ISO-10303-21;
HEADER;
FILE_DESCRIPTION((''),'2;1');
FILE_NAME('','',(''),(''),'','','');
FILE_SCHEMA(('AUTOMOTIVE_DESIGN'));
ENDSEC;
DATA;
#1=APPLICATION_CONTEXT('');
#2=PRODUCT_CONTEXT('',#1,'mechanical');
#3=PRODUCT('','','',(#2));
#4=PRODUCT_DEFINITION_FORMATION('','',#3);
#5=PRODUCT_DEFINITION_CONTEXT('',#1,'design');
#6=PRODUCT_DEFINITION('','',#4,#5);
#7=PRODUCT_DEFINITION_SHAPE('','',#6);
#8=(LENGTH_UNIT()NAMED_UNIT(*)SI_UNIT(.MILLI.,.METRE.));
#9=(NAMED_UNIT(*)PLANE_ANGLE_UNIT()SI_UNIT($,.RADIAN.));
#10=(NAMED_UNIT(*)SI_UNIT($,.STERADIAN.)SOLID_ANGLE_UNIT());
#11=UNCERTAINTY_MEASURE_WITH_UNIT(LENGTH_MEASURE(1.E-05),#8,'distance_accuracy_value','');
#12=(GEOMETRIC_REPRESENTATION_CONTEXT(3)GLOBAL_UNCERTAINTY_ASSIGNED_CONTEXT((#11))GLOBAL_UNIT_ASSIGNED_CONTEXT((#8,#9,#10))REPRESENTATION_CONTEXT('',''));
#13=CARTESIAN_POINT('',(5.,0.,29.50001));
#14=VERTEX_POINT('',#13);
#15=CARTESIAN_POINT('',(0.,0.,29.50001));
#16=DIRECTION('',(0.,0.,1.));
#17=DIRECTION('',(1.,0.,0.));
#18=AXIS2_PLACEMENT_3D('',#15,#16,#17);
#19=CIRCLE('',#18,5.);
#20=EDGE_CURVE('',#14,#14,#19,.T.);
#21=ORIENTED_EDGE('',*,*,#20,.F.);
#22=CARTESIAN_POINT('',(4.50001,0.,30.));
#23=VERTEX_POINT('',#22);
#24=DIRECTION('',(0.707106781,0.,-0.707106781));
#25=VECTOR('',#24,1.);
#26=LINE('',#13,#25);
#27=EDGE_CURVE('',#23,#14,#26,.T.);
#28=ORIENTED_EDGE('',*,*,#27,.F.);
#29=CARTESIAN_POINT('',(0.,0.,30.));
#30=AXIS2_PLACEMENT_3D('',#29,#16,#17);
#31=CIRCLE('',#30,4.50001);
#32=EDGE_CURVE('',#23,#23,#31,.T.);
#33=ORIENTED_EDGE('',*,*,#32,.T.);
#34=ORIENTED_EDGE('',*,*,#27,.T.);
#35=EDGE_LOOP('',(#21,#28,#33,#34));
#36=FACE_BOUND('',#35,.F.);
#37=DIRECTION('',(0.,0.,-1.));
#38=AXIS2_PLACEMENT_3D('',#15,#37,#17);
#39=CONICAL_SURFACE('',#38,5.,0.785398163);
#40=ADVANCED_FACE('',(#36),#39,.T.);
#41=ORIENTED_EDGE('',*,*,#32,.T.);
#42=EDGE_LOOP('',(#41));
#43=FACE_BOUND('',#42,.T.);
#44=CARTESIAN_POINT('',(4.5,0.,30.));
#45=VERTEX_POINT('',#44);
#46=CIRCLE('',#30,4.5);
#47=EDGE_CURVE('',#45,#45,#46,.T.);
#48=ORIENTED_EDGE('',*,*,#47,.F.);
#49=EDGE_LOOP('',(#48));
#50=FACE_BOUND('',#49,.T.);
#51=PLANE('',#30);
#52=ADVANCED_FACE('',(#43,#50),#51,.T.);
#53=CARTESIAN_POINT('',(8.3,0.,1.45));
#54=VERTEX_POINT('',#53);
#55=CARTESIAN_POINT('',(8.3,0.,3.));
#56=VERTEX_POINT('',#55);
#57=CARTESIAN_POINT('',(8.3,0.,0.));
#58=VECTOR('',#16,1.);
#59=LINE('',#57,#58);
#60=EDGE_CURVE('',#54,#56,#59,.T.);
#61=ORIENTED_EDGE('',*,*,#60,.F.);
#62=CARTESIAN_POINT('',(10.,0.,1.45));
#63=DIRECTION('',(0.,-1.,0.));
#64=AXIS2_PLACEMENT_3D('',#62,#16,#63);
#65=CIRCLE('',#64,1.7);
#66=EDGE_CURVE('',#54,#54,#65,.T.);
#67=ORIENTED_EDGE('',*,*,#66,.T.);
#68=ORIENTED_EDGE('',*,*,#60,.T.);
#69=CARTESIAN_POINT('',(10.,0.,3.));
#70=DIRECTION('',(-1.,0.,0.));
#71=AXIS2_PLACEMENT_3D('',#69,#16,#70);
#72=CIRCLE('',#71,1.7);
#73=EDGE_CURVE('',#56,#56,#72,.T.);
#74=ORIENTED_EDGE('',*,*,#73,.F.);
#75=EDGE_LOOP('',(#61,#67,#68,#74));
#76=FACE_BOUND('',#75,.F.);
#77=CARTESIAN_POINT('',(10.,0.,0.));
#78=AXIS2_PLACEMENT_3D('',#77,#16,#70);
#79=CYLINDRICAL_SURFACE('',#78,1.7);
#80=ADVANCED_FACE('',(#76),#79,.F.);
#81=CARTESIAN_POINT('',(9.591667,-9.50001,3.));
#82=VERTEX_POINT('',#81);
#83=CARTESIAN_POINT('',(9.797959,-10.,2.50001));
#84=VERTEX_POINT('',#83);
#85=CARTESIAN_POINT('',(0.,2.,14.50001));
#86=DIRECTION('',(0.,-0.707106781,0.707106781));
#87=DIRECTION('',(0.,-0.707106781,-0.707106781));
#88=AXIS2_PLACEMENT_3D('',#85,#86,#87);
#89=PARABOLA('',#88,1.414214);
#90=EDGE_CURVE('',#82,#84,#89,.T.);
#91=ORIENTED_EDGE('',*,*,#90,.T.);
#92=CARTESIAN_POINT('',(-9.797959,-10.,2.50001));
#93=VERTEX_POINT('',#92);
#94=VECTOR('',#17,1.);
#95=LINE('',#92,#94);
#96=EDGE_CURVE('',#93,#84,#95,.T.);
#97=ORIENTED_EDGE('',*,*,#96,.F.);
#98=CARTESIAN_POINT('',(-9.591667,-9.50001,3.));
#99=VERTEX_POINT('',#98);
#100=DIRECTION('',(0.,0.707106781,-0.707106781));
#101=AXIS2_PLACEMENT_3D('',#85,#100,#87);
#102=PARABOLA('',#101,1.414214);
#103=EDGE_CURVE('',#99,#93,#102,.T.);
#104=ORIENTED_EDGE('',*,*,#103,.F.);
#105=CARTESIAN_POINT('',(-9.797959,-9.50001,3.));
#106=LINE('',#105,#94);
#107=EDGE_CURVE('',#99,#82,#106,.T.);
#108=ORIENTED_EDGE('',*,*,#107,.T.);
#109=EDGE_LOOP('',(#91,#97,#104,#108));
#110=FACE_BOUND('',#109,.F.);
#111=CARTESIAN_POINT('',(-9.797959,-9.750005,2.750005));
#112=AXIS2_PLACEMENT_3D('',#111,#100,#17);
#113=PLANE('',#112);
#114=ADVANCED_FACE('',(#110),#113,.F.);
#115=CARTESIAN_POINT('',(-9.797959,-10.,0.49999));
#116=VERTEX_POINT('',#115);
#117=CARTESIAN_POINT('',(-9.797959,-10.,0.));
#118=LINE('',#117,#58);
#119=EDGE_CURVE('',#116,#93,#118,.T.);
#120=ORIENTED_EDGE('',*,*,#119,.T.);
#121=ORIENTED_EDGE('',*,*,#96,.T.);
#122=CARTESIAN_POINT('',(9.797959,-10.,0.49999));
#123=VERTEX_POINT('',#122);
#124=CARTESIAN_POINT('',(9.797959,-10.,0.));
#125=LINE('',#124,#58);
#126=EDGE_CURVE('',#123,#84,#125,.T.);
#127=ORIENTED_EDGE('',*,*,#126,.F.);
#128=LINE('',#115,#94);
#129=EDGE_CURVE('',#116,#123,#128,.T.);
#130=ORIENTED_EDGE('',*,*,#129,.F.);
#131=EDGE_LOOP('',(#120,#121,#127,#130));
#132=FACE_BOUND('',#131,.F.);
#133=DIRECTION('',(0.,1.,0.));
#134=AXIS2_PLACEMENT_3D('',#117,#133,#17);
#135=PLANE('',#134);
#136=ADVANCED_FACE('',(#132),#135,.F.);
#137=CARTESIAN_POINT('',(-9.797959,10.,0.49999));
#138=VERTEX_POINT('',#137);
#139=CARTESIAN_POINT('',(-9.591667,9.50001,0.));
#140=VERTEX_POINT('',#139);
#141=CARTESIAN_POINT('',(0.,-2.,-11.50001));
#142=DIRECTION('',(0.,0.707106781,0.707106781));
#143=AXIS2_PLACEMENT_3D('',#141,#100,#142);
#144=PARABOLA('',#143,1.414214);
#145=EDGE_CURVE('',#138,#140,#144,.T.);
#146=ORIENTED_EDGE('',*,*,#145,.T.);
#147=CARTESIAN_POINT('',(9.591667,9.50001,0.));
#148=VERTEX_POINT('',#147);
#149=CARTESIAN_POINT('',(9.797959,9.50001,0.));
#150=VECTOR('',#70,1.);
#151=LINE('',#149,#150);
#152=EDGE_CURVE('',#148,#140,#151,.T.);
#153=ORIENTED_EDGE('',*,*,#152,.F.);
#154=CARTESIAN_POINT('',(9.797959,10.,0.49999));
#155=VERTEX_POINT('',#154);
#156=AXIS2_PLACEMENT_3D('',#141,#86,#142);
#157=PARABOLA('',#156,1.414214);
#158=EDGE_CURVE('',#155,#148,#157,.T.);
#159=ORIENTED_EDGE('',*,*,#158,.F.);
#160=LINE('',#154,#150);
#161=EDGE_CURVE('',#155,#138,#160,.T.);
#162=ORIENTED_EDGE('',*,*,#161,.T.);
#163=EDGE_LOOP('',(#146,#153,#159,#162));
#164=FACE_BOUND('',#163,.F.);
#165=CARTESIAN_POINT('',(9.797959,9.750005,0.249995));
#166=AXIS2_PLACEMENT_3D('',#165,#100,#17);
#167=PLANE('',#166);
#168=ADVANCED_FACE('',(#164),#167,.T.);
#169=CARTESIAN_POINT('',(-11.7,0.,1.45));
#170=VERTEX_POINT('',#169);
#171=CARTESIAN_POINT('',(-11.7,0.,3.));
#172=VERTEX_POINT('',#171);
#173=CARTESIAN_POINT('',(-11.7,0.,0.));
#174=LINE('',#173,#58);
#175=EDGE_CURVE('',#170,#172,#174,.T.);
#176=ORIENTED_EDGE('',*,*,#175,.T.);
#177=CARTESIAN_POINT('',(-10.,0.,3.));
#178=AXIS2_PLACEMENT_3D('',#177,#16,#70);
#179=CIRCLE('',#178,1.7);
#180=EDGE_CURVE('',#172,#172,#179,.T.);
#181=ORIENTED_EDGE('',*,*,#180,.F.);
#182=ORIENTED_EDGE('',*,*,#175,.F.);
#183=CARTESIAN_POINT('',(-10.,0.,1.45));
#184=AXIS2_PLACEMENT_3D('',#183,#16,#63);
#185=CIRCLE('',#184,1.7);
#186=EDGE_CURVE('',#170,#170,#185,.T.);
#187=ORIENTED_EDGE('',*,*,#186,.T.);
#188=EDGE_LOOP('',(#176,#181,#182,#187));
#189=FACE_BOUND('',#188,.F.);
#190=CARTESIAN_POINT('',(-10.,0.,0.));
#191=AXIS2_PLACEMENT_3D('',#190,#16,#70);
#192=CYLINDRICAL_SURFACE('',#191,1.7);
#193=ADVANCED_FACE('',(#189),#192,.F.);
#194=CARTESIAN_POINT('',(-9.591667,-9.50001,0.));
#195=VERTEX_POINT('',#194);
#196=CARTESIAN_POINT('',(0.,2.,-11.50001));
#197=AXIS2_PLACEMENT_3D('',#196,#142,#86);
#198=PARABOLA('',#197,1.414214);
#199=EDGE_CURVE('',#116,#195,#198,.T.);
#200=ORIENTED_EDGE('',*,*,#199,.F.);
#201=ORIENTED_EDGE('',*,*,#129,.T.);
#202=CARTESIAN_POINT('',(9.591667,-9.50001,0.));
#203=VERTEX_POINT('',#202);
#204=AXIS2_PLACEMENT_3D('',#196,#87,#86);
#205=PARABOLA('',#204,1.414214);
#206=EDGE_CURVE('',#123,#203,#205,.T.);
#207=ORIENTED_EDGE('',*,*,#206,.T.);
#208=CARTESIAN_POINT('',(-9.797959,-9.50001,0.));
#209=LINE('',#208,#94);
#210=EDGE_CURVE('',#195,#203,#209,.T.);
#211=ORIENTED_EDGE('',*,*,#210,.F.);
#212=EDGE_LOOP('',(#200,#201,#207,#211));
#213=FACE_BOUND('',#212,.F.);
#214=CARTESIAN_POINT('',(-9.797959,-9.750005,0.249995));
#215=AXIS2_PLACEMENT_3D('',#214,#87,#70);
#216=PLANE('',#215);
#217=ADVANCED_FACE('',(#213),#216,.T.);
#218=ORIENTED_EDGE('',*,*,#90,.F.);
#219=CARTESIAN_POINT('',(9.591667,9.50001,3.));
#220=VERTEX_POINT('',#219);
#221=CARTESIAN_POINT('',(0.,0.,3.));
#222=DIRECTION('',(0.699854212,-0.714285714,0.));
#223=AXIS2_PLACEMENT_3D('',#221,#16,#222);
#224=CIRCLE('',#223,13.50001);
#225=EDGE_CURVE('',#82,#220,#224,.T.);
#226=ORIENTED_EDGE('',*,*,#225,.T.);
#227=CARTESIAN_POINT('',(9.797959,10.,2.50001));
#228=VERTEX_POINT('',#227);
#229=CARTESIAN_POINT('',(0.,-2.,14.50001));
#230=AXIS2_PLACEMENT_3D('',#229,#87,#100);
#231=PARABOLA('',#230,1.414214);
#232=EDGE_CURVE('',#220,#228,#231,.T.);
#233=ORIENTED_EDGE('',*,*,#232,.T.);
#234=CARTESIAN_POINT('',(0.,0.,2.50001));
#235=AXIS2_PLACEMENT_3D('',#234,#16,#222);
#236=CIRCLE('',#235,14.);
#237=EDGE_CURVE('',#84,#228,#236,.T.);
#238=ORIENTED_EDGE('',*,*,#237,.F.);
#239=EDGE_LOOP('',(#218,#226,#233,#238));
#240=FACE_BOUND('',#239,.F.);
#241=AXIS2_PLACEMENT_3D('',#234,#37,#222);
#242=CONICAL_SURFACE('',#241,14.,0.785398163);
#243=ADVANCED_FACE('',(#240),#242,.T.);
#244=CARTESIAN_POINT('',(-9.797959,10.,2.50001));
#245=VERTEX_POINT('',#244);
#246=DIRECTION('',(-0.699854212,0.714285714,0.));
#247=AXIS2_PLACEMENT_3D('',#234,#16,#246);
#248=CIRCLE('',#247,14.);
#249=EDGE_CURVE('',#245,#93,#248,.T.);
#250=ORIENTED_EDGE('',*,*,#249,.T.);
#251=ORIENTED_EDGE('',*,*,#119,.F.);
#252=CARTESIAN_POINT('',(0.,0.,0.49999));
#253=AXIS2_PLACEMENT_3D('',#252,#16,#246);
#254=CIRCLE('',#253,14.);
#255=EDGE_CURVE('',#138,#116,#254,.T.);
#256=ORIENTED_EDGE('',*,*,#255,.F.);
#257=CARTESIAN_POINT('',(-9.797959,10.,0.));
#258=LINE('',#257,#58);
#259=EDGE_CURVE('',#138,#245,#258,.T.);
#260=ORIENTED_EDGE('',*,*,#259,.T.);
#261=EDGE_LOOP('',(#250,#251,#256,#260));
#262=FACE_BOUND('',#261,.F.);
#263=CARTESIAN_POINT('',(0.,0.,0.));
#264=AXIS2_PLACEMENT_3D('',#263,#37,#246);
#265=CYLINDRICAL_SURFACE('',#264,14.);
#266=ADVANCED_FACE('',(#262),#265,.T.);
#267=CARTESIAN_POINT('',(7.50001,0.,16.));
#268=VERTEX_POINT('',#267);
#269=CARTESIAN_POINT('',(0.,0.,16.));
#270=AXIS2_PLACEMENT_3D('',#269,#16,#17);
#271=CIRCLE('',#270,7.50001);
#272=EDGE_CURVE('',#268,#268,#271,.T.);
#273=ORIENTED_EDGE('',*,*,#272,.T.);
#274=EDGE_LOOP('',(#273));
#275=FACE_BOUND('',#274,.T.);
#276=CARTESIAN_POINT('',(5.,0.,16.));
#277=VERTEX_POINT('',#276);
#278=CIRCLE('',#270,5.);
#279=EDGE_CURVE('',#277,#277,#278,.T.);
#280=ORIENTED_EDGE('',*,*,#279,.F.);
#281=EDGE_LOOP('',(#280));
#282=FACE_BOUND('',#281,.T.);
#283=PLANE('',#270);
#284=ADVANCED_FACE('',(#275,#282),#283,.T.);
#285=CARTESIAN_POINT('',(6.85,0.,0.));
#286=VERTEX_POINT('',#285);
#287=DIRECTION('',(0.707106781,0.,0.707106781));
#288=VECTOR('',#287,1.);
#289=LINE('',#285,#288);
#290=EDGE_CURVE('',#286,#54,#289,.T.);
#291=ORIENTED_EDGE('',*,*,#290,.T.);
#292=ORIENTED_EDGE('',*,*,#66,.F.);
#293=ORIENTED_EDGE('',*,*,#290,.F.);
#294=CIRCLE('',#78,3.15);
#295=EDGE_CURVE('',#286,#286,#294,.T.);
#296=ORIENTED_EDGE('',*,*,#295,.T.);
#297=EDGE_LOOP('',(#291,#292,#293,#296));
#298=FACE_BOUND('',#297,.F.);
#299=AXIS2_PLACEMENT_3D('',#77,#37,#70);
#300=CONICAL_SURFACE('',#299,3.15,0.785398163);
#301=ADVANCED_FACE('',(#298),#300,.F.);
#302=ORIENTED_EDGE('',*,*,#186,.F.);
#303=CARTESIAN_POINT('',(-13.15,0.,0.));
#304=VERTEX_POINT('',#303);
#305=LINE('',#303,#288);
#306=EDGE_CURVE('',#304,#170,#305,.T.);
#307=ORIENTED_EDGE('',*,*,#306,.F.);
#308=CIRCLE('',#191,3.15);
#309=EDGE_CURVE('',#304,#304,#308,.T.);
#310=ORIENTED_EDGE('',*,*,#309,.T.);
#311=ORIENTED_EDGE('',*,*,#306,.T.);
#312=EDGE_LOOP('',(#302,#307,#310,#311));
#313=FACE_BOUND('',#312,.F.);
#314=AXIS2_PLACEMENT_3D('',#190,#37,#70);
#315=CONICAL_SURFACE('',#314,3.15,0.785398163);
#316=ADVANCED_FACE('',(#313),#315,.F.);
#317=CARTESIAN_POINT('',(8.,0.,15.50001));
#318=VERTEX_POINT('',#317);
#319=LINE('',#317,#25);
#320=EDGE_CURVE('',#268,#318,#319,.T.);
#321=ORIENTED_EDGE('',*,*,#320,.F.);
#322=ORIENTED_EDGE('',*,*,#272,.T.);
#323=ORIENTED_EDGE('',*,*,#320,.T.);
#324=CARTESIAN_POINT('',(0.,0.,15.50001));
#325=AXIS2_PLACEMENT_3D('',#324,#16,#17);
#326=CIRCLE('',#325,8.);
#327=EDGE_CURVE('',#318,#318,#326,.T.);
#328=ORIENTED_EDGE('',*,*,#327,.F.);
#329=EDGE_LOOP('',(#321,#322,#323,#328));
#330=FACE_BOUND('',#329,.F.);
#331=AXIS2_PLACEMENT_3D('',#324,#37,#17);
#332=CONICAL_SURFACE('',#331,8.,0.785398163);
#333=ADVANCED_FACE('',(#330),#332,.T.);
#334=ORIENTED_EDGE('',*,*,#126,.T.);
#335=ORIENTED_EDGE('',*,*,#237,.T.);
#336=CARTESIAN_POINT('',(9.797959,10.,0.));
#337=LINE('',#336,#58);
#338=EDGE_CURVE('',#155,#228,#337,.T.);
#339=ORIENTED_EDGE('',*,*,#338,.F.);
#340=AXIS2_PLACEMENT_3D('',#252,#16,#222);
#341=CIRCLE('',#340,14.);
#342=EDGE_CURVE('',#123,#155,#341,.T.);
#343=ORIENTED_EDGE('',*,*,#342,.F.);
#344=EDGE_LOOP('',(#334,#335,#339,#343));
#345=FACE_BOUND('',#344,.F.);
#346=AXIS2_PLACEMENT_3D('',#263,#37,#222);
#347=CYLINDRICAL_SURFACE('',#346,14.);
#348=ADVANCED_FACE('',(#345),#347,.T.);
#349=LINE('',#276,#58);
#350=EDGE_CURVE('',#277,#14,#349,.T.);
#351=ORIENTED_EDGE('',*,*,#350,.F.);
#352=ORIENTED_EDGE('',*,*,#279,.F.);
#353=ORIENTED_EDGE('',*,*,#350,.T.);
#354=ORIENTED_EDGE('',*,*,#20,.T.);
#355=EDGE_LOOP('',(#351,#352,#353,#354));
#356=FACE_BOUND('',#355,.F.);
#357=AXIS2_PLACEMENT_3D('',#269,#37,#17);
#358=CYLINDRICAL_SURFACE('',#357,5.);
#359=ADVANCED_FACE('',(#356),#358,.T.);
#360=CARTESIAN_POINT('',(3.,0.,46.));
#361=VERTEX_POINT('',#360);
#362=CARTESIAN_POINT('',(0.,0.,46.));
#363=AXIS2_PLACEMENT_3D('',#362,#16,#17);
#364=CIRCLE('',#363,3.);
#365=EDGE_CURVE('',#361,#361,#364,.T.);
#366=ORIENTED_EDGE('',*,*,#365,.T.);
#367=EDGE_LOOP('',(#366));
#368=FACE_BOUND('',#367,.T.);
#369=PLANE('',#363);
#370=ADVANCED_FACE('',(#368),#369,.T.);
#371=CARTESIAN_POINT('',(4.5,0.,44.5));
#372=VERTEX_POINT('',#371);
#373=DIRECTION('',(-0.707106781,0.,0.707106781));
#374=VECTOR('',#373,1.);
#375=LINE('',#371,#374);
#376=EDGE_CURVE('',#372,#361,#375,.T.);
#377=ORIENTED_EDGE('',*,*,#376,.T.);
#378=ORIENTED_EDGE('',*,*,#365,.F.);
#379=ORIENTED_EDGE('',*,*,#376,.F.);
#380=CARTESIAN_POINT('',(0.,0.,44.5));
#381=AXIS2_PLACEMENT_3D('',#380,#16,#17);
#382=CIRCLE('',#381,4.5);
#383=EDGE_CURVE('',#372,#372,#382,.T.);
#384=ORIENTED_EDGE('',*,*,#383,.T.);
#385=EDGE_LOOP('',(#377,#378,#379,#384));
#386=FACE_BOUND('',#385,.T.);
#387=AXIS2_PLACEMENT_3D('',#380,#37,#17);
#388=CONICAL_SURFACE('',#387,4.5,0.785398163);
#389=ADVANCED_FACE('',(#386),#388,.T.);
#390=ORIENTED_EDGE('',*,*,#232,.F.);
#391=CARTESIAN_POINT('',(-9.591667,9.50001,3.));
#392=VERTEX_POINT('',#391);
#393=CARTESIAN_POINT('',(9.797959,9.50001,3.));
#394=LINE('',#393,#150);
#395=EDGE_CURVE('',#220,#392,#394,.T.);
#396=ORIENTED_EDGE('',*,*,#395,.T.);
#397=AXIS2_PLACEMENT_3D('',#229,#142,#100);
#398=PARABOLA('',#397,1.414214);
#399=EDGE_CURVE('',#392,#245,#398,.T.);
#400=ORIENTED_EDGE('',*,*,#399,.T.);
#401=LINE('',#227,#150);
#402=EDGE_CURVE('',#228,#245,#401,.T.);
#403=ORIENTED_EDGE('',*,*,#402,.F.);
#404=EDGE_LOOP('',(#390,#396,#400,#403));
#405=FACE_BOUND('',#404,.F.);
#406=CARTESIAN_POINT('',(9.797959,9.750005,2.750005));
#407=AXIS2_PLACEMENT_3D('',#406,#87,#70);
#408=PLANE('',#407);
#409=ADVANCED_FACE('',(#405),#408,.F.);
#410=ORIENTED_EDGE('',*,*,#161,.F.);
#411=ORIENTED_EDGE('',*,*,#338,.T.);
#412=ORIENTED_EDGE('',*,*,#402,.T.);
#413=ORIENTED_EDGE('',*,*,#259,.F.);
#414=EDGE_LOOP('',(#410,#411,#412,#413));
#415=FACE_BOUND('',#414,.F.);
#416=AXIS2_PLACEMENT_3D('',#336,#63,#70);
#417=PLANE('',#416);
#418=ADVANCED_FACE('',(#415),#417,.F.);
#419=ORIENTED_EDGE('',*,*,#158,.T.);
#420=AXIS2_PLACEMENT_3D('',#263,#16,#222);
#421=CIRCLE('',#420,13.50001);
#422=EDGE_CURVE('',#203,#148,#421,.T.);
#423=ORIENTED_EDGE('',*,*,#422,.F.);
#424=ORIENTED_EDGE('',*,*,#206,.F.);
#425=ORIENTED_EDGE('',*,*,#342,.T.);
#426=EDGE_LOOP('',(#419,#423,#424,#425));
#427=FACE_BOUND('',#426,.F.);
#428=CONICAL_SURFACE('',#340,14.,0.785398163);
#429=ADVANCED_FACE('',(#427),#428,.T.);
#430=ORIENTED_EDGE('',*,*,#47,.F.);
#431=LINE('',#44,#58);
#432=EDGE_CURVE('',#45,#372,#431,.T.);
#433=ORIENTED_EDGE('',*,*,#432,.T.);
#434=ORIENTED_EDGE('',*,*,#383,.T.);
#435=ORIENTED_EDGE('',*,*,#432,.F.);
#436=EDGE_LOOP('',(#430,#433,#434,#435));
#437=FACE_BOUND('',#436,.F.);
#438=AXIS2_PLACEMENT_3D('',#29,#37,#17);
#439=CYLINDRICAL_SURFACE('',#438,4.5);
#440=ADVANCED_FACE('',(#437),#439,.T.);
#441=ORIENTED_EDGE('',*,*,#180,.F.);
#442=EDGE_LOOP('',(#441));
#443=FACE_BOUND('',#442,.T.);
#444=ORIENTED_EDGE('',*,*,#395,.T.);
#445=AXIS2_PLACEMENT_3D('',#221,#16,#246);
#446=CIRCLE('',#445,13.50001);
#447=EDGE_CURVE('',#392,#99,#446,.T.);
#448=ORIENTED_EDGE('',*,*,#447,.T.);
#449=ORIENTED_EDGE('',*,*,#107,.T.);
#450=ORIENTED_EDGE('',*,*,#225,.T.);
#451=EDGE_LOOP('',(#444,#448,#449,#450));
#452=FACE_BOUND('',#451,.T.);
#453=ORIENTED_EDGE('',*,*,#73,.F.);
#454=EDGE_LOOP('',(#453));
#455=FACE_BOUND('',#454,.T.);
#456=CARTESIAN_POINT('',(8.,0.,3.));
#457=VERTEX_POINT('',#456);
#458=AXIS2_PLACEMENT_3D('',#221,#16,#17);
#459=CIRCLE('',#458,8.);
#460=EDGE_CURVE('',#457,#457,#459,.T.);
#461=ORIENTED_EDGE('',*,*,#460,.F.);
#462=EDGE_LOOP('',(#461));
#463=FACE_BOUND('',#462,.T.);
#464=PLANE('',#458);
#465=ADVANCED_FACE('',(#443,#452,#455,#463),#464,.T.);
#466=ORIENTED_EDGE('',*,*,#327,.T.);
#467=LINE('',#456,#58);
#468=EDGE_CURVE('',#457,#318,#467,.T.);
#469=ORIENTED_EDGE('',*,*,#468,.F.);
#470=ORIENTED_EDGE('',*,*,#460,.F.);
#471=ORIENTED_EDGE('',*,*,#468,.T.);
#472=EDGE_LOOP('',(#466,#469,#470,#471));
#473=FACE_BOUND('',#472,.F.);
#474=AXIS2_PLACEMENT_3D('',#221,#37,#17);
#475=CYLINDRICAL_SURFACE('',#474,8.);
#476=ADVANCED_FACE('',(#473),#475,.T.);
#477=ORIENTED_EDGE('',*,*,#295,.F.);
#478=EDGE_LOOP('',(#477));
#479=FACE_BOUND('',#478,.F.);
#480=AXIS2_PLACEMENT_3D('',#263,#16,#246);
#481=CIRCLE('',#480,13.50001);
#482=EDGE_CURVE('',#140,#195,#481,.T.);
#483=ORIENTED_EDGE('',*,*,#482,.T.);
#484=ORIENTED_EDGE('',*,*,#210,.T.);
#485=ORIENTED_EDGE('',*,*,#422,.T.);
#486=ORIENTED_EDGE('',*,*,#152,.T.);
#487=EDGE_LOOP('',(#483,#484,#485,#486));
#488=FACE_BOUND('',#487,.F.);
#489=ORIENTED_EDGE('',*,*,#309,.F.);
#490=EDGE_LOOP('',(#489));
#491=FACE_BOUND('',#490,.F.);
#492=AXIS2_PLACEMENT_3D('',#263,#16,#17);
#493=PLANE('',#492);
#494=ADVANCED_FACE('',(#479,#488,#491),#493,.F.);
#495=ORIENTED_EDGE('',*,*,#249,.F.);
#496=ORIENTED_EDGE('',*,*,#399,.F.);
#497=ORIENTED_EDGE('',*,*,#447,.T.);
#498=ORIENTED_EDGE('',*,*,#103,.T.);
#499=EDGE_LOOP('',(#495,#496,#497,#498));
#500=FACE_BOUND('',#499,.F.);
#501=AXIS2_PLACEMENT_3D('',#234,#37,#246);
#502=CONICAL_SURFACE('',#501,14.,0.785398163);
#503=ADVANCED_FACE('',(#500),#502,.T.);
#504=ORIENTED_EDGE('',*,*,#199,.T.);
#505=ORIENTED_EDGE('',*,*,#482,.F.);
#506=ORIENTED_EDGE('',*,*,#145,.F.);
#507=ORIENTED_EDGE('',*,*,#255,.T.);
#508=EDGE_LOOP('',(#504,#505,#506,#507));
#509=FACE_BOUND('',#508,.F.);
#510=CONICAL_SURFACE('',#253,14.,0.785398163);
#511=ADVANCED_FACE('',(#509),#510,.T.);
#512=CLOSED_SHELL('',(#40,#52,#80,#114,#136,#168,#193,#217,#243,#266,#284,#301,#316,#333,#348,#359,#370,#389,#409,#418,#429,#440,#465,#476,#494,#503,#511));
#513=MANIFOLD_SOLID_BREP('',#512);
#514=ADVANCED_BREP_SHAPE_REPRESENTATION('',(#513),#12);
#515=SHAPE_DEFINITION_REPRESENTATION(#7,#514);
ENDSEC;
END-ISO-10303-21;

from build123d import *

# Parameters (mm, degrees)
F1_DEPTH       = 3
F2_D           = 3.4
F2_CSINK_D     = 6.3
F2_CSINK_ANGLE = 90
F3_R           = 8
F4_DEPTH       = 13
F5_R           = 5
F6_DEPTH       = 14
F7_R           = 4.5
F8_DEPTH       = 16
F9_SIZE        = 1.5
F10_SIZE       = 0.49999


# Not quite as in the source:
# - a fillet or chamfer is up to 0.001 mm smaller than in the source, because OpenCascade refuses the exact size


with BuildPart() as f1:
    # F0 (on Top) → F1 (new body)
    with BuildSketch(Plane.XY):
        with BuildLine():
            Line((9.7979589711, 10), (-9.7979589711, 10))
            ThreePointArc((-9.7979589711, 10), (-14, 0), (-9.7979589711, -10))
            Line((-9.7979589711, -10), (9.7979589711, -10))
            ThreePointArc((9.7979589711, -10), (14, 0), (9.7979589711, 10))
        make_face()
    extrude(amount=F1_DEPTH)

    # F2 (through all)
    with Locations(Plane(origin=(0, 0, 0), x_dir=(1, 0, 0), z_dir=(0, 0, -1))):
        with Locations((-10, 0), (10, 0)):
            CounterSinkHole(F2_D / 2, F2_CSINK_D / 2, counter_sink_angle=F2_CSINK_ANGLE)

    # F3 (on face) → F4 (join)
    with BuildSketch(Plane.XY.offset(3)):
        Circle(F3_R)
    extrude(amount=F4_DEPTH)

    # F5 (on face) → F6 (join)
    with BuildSketch(Plane.XY.offset(16)):
        Circle(F5_R)
    extrude(amount=F6_DEPTH)

    # F7 (on face) → F8 (join)
    with BuildSketch(Plane.XY.offset(30)):
        Circle(F7_R)
    extrude(amount=F8_DEPTH)

    # F9
    f9_edges = [f1.edges().sort_by_distance(p)[0] for p in [
        (-4.5, 0, 46),
    ]]
    chamfer(f9_edges, length=F9_SIZE)

    # F10 (size 0.5 in the source; OpenCascade refuses exactly that, so slightly less here)
    f10_edges = [f1.edges().sort_by_distance(p)[0] for p in [
        (-5, 0, 30),
        (0, -10, 3),
        (14, 0, 3),
        (0, 10, 3),
        (-14, 0, 3),
        (-14, 0, 0),
        (0, -10, 0),
        (14, 0, 0),
        (0, 10, 0),
        (-8, 0, 16),
    ]]
    chamfer(f10_edges, length=F10_SIZE)


solid = f1.part
